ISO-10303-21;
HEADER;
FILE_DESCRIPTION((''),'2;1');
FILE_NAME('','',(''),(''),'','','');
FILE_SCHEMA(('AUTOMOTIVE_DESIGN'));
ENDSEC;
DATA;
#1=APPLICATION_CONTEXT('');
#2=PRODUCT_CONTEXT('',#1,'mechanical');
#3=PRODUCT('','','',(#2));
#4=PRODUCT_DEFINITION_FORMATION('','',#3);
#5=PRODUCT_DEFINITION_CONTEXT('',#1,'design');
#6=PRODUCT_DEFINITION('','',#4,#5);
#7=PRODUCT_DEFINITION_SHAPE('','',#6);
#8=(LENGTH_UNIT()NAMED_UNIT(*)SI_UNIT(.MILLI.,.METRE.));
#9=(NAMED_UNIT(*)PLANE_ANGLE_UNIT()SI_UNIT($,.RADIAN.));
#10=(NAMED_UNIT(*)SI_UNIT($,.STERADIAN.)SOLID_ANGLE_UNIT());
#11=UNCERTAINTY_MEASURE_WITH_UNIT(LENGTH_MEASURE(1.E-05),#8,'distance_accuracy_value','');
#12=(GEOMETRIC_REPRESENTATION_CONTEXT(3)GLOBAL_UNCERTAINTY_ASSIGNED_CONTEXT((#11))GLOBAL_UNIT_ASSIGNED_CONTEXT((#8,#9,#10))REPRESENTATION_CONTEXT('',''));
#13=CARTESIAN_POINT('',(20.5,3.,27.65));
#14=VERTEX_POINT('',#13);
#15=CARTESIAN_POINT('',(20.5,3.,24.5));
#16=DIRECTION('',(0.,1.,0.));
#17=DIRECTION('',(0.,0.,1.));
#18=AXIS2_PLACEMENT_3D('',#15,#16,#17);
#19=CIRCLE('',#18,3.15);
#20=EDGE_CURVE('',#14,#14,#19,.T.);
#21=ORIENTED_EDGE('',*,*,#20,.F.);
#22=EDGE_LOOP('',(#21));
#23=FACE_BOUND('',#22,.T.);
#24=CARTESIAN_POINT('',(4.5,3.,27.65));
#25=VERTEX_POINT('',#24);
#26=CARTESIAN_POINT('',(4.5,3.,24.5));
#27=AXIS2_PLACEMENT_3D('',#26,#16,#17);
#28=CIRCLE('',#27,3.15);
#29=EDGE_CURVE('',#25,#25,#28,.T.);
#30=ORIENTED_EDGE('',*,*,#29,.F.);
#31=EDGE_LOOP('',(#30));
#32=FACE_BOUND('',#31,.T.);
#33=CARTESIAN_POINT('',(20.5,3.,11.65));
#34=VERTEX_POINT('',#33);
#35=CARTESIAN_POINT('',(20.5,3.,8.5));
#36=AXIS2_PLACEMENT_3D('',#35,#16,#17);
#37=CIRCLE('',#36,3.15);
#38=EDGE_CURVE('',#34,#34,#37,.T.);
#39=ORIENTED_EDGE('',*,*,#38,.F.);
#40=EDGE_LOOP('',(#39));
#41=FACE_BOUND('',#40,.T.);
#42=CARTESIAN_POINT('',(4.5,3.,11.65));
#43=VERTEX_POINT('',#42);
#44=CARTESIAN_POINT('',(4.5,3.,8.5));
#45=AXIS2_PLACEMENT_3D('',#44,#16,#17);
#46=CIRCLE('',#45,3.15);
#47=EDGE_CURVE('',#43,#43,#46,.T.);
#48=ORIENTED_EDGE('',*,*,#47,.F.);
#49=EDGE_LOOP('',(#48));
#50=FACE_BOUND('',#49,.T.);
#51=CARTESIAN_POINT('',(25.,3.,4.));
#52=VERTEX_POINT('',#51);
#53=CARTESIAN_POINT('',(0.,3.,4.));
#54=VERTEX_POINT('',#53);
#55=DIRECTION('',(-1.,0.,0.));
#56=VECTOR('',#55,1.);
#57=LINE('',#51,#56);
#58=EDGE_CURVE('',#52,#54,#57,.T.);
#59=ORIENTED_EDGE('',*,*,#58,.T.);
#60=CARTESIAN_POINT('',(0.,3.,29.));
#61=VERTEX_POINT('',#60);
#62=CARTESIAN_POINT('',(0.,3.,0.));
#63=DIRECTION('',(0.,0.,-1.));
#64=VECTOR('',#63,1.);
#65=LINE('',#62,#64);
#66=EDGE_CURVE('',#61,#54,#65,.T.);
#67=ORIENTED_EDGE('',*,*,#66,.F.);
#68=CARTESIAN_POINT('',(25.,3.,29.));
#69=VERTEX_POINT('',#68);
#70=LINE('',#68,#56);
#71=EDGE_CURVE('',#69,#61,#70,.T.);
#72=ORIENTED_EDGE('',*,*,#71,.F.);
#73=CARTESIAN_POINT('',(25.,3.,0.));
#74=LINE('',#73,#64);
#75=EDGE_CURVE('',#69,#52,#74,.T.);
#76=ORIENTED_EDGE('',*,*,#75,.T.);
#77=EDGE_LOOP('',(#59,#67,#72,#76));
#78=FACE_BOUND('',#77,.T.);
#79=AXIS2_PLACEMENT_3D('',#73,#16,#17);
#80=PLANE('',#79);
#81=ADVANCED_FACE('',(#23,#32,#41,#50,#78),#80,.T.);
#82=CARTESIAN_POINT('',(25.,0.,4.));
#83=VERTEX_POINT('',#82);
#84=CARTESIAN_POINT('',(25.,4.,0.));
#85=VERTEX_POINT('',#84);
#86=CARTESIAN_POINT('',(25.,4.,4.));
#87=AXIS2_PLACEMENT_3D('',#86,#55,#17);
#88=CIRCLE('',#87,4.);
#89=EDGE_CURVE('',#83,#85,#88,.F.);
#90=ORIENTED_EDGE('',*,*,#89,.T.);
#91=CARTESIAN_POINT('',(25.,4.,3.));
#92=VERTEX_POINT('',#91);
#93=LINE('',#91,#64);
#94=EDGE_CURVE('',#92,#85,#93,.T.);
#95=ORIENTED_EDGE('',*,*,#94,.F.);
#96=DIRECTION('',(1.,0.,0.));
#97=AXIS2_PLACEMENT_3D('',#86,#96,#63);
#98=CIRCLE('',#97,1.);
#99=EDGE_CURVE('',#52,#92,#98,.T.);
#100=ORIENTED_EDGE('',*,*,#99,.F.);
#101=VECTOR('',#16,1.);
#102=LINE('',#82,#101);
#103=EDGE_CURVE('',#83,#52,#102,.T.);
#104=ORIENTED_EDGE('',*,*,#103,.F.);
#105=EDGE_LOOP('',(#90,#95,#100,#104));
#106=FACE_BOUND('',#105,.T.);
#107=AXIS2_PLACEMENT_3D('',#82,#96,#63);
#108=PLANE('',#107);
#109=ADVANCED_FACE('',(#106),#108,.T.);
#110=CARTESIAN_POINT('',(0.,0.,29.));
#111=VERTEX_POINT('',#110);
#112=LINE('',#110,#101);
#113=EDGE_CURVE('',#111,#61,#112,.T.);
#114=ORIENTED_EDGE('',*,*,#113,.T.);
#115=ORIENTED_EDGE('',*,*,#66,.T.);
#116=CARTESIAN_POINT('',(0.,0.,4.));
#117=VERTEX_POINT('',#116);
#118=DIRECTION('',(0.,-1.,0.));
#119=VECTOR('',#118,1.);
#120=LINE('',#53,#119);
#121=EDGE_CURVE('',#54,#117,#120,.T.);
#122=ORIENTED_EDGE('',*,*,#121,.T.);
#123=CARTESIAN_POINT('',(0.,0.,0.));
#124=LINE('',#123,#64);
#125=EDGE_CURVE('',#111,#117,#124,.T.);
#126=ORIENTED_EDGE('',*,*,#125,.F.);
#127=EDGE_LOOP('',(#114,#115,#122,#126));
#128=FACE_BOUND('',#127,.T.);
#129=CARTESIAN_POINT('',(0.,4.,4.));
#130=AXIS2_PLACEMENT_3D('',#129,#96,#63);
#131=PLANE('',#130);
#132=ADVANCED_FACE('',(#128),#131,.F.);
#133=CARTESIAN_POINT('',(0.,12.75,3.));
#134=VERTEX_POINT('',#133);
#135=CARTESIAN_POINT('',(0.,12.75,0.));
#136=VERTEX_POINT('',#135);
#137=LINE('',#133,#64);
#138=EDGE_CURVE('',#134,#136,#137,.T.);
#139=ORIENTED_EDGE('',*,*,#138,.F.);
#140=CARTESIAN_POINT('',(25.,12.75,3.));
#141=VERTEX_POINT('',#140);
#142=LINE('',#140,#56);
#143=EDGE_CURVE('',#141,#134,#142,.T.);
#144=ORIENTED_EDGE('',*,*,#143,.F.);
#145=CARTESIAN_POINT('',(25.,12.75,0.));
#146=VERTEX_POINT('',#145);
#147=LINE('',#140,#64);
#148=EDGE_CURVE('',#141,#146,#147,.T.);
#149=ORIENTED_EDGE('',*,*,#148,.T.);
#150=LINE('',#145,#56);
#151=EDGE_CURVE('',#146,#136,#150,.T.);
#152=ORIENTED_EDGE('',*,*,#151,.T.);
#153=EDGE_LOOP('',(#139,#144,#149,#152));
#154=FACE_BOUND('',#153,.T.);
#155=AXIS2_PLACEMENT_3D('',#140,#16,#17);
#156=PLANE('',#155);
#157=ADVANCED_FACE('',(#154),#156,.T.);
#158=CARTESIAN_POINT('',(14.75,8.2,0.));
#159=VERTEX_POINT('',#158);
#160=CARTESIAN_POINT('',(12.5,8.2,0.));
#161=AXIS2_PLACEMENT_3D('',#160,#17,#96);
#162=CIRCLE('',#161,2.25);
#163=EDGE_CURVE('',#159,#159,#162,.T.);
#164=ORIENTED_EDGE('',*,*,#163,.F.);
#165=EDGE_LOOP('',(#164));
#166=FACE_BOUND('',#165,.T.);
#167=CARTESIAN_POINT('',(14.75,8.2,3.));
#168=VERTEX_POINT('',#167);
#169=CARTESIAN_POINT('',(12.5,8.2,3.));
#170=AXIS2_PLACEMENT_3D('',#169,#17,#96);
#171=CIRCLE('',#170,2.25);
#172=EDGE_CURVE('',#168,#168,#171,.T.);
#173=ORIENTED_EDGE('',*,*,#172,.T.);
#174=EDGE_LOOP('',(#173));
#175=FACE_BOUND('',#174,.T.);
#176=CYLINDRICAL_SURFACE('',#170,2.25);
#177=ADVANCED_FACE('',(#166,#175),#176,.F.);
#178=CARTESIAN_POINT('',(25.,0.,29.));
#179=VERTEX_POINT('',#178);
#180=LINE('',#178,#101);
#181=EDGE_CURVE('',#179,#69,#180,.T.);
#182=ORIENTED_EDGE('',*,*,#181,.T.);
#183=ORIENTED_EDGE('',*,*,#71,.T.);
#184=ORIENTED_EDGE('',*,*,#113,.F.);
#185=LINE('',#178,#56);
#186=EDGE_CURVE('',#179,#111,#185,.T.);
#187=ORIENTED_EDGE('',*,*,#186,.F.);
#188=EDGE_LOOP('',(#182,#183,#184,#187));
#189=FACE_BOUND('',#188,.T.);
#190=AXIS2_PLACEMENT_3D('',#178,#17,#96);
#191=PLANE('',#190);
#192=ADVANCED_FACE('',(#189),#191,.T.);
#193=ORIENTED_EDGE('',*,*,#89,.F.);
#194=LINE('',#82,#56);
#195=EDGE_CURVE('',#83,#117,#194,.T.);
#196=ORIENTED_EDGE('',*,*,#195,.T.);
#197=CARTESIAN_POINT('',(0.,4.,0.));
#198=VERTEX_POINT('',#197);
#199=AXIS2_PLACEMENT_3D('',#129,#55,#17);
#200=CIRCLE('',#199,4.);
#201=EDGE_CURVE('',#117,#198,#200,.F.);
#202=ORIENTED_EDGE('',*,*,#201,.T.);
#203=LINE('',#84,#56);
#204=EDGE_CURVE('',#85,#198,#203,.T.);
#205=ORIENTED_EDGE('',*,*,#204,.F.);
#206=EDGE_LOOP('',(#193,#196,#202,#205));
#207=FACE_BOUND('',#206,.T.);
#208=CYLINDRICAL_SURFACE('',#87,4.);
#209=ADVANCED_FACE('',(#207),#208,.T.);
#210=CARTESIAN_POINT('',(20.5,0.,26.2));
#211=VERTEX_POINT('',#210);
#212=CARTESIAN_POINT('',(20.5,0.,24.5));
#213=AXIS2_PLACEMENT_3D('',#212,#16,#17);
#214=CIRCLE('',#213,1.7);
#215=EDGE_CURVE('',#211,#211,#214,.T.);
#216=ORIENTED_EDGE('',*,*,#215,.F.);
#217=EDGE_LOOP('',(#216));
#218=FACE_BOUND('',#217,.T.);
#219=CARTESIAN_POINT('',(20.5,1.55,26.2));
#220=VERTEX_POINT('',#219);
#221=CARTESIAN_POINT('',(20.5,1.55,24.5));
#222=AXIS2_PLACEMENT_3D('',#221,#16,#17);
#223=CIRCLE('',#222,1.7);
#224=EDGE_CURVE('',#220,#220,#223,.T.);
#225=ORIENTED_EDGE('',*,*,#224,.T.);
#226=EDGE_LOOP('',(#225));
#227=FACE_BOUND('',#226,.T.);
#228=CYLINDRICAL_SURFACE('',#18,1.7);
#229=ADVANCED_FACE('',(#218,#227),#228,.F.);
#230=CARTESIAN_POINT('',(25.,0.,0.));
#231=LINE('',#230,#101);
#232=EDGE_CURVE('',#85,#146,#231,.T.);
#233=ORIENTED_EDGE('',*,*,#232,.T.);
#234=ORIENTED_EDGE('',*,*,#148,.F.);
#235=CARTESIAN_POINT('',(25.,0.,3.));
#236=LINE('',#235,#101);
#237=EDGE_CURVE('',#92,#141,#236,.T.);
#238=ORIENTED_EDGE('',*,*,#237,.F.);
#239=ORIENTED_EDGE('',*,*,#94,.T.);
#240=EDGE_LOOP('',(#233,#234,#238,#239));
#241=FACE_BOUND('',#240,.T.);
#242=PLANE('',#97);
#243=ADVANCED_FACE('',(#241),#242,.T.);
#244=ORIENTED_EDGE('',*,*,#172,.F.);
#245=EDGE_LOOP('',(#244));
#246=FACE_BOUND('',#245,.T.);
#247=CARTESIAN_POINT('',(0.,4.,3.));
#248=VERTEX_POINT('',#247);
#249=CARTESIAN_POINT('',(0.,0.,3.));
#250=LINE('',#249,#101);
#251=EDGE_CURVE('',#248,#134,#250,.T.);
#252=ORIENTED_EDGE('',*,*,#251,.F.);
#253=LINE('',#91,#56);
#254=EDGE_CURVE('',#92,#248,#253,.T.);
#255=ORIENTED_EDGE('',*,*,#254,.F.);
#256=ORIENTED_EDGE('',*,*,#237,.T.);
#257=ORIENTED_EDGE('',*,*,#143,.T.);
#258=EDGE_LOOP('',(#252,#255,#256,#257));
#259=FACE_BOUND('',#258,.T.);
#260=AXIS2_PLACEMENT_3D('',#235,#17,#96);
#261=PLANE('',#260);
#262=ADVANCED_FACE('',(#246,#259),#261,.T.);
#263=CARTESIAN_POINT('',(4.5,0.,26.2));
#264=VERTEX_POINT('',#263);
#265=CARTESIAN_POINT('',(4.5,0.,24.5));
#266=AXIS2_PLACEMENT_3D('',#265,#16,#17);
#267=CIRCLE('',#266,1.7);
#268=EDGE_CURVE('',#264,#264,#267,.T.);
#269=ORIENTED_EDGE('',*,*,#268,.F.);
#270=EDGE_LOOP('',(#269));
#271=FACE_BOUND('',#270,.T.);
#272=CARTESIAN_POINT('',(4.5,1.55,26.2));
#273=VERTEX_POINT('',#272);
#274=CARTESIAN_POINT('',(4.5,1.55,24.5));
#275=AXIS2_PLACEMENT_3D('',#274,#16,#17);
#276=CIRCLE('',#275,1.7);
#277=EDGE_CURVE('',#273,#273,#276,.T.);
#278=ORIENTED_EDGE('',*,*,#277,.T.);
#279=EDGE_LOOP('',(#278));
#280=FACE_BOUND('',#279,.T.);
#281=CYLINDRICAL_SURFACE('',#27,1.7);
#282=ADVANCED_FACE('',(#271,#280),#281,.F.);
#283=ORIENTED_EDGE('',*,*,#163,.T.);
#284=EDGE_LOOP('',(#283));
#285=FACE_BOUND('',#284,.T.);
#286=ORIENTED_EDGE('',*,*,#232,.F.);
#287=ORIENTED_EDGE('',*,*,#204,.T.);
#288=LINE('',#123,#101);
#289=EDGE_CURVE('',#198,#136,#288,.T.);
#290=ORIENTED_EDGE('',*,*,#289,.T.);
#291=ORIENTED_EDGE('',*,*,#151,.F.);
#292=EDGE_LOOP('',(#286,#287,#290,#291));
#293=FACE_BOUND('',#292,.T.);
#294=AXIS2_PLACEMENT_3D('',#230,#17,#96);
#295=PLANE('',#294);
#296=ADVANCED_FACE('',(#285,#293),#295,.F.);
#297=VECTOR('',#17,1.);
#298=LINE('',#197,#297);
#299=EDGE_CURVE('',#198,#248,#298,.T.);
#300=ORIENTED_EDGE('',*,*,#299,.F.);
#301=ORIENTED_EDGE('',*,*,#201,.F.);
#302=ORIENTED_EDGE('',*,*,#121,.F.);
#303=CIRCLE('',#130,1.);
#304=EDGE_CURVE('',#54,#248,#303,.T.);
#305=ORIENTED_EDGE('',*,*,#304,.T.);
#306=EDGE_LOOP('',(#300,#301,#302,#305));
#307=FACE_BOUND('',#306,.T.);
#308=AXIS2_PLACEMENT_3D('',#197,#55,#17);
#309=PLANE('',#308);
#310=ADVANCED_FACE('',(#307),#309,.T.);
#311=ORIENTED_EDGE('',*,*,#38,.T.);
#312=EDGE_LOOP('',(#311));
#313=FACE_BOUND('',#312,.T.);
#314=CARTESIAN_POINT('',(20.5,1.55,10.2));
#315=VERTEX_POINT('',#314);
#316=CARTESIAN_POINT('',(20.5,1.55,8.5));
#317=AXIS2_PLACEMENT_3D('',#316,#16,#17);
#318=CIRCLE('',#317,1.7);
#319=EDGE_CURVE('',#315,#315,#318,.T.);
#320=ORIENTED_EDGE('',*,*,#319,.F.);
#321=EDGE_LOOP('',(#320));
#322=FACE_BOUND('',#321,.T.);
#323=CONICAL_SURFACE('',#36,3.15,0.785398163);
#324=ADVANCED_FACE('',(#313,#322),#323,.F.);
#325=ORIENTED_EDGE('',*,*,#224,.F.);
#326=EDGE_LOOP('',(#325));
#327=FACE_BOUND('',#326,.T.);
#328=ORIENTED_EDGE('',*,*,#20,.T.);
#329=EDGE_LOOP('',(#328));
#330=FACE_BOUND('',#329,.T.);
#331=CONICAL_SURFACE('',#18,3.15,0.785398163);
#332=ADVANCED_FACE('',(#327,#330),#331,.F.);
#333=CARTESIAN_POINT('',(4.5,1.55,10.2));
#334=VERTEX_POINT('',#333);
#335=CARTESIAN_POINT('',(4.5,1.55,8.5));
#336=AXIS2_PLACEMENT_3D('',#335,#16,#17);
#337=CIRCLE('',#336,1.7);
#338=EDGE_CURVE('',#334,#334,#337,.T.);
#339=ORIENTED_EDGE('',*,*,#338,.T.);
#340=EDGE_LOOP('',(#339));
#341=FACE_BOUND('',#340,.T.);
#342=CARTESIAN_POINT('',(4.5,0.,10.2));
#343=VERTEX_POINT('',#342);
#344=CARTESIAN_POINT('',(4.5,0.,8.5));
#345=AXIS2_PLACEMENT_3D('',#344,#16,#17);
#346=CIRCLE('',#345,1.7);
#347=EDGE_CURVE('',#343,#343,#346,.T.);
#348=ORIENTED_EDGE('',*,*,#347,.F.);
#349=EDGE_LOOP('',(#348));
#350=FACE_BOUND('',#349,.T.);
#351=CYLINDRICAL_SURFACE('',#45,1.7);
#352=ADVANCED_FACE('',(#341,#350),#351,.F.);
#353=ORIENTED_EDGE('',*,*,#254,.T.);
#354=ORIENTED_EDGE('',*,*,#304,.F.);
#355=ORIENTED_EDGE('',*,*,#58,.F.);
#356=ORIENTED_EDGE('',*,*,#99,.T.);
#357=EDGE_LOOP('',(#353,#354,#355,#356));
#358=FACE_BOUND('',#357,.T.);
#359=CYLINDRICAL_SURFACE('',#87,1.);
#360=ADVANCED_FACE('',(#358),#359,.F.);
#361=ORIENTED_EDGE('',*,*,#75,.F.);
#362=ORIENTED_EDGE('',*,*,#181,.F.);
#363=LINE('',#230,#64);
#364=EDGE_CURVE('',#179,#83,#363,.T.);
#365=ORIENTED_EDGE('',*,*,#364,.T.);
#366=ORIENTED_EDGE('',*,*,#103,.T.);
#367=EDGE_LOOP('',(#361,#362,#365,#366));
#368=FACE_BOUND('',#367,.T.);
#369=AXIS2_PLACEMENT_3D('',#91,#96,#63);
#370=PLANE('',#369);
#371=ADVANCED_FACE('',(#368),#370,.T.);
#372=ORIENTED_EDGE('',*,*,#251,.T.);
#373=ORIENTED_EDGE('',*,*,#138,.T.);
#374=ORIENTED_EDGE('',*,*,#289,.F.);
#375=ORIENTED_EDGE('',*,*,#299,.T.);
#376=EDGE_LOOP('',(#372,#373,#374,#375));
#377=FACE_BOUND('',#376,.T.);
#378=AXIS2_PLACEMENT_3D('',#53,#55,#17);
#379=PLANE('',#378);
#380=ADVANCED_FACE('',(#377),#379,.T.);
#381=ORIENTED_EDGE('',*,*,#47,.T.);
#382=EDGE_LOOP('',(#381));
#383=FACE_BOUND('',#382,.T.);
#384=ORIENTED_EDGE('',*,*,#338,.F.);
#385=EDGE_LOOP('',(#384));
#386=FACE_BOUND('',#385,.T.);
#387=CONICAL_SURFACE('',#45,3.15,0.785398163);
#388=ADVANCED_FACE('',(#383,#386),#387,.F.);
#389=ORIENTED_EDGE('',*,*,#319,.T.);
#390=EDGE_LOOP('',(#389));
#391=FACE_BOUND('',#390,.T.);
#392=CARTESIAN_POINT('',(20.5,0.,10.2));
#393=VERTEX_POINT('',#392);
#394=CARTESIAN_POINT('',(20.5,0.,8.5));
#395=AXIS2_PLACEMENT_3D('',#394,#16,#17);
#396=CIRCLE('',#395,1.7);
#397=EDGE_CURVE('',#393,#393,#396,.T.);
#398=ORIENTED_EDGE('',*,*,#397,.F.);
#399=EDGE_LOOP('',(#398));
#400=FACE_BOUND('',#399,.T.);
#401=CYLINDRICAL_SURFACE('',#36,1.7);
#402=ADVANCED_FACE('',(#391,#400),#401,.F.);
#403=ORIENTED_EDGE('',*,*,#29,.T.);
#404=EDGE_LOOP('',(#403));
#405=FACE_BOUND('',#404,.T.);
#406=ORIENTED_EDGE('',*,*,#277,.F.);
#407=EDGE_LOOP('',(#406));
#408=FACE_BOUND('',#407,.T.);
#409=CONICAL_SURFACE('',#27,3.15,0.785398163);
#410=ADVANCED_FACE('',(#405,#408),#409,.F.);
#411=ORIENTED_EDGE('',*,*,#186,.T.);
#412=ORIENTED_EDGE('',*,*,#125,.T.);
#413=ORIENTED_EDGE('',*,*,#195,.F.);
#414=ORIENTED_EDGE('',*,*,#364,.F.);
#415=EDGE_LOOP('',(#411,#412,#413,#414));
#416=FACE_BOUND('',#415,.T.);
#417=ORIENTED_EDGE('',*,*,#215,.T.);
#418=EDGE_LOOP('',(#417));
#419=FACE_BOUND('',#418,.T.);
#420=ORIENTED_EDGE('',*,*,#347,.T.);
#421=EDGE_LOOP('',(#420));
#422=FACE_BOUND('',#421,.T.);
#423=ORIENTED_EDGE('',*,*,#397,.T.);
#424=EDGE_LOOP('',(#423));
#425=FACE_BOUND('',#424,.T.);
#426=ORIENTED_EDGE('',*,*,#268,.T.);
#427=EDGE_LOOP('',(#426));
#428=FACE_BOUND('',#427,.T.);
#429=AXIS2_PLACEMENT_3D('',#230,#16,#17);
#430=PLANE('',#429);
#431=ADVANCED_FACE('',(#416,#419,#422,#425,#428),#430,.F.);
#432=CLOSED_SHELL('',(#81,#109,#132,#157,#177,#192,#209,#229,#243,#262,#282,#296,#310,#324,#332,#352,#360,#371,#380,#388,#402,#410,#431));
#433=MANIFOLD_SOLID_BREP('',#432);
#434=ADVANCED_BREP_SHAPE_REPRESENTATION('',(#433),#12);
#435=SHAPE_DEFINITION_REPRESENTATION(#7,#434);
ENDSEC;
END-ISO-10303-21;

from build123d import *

# Parameters (mm, degrees)
T_LE_DE_BASE_PLI_E1_DEPTH                   = 25
FRAISAGE_POUR_VIS_T_TE_FRAIS_E_M31_AT_COUNT = 2
FRAISAGE_POUR_VIS_T_TE_FRAIS_E_M31_AT_PITCH = 16
FRAISAGE_POUR_VIS_T_TE_FRAIS_E_M31_2_COUNT  = 2
FRAISAGE_POUR_VIS_T_TE_FRAIS_E_M31_2_PITCH  = 22.627416998
FRAISAGE_POUR_VIS_T_TE_FRAIS_E_M31_3_COUNT  = 2
FRAISAGE_POUR_VIS_T_TE_FRAIS_E_M31_3_PITCH  = 16
D_GAGEMENT_M41_D                            = 4.5


# Sheet-metal steps are written as plain solids
with BuildPart() as part:
    # Esquisse1 → Tôle de base pliée1 (new body)
    with BuildSketch(Plane(origin=(0, 0, 0), x_dir=(0, 0, -1), z_dir=(1, 0, 0))):
        with BuildLine():
            Line((0, 12.75), (0, 4))
            ThreePointArc((0, 4), (-1.171572875, 1.171572875), (-4, 0))
            Line((-4, 0), (-29, 0))
            Line((-29, 0), (-29, 3))
            Line((-29, 3), (-4, 3))
            ThreePointArc((-4, 3), (-3.292893219, 3.292893219), (-3, 4))
            Line((-3, 4), (-3, 12.75))
            Line((-3, 12.75), (0, 12.75))
        make_face()
    extrude(amount=T_LE_DE_BASE_PLI_E1_DEPTH)

    # Esquisse7 → Fraisage pour vis à tête fraisée M31 (revolve, cut)
    with BuildSketch(Plane(origin=(4.5, 3, 24.5), x_dir=(0, 0, 1), z_dir=(1, 0, 0))):
        Polygon((0, 0), (0, 3), (1.7, 3), (1.7, 1.45), (3.15, 0), align=None)
    fraisage_pour_vis_t_te_frais_e_m31 = revolve(axis=Axis((4.5, 9.35, 24.5), (0, -1, 0)), mode=Mode.SUBTRACT)

    # Fraisage pour vis à tête fraisée M31 at: Fraisage pour vis à tête fraisée M31 ×2
    with Locations(*[(0, 0, -i * FRAISAGE_POUR_VIS_T_TE_FRAIS_E_M31_AT_PITCH) for i in range(1, FRAISAGE_POUR_VIS_T_TE_FRAIS_E_M31_AT_COUNT)]):
        add(fraisage_pour_vis_t_te_frais_e_m31, mode=Mode.SUBTRACT)

    # Fraisage pour vis _ t_te frais_e M31 2: Fraisage pour vis à tête fraisée M31 ×2
    with Locations(*[Vector(0.7071067811865476, 0, -0.7071067811865476) * (i * FRAISAGE_POUR_VIS_T_TE_FRAIS_E_M31_2_PITCH) for i in range(1, FRAISAGE_POUR_VIS_T_TE_FRAIS_E_M31_2_COUNT)]):
        add(fraisage_pour_vis_t_te_frais_e_m31, mode=Mode.SUBTRACT)

    # Fraisage pour vis _ t_te frais_e M31 3: Fraisage pour vis à tête fraisée M31 ×2
    with Locations(*[(i * FRAISAGE_POUR_VIS_T_TE_FRAIS_E_M31_3_PITCH, 0, 0) for i in range(1, FRAISAGE_POUR_VIS_T_TE_FRAIS_E_M31_3_COUNT)]):
        add(fraisage_pour_vis_t_te_frais_e_m31, mode=Mode.SUBTRACT)

    # Dégagement M41 (through all)
    with Locations(Plane.XY.offset(3)):
        with Locations((12.5, 8.2)):
            Hole(D_GAGEMENT_M41_D / 2)


solid = part.part
